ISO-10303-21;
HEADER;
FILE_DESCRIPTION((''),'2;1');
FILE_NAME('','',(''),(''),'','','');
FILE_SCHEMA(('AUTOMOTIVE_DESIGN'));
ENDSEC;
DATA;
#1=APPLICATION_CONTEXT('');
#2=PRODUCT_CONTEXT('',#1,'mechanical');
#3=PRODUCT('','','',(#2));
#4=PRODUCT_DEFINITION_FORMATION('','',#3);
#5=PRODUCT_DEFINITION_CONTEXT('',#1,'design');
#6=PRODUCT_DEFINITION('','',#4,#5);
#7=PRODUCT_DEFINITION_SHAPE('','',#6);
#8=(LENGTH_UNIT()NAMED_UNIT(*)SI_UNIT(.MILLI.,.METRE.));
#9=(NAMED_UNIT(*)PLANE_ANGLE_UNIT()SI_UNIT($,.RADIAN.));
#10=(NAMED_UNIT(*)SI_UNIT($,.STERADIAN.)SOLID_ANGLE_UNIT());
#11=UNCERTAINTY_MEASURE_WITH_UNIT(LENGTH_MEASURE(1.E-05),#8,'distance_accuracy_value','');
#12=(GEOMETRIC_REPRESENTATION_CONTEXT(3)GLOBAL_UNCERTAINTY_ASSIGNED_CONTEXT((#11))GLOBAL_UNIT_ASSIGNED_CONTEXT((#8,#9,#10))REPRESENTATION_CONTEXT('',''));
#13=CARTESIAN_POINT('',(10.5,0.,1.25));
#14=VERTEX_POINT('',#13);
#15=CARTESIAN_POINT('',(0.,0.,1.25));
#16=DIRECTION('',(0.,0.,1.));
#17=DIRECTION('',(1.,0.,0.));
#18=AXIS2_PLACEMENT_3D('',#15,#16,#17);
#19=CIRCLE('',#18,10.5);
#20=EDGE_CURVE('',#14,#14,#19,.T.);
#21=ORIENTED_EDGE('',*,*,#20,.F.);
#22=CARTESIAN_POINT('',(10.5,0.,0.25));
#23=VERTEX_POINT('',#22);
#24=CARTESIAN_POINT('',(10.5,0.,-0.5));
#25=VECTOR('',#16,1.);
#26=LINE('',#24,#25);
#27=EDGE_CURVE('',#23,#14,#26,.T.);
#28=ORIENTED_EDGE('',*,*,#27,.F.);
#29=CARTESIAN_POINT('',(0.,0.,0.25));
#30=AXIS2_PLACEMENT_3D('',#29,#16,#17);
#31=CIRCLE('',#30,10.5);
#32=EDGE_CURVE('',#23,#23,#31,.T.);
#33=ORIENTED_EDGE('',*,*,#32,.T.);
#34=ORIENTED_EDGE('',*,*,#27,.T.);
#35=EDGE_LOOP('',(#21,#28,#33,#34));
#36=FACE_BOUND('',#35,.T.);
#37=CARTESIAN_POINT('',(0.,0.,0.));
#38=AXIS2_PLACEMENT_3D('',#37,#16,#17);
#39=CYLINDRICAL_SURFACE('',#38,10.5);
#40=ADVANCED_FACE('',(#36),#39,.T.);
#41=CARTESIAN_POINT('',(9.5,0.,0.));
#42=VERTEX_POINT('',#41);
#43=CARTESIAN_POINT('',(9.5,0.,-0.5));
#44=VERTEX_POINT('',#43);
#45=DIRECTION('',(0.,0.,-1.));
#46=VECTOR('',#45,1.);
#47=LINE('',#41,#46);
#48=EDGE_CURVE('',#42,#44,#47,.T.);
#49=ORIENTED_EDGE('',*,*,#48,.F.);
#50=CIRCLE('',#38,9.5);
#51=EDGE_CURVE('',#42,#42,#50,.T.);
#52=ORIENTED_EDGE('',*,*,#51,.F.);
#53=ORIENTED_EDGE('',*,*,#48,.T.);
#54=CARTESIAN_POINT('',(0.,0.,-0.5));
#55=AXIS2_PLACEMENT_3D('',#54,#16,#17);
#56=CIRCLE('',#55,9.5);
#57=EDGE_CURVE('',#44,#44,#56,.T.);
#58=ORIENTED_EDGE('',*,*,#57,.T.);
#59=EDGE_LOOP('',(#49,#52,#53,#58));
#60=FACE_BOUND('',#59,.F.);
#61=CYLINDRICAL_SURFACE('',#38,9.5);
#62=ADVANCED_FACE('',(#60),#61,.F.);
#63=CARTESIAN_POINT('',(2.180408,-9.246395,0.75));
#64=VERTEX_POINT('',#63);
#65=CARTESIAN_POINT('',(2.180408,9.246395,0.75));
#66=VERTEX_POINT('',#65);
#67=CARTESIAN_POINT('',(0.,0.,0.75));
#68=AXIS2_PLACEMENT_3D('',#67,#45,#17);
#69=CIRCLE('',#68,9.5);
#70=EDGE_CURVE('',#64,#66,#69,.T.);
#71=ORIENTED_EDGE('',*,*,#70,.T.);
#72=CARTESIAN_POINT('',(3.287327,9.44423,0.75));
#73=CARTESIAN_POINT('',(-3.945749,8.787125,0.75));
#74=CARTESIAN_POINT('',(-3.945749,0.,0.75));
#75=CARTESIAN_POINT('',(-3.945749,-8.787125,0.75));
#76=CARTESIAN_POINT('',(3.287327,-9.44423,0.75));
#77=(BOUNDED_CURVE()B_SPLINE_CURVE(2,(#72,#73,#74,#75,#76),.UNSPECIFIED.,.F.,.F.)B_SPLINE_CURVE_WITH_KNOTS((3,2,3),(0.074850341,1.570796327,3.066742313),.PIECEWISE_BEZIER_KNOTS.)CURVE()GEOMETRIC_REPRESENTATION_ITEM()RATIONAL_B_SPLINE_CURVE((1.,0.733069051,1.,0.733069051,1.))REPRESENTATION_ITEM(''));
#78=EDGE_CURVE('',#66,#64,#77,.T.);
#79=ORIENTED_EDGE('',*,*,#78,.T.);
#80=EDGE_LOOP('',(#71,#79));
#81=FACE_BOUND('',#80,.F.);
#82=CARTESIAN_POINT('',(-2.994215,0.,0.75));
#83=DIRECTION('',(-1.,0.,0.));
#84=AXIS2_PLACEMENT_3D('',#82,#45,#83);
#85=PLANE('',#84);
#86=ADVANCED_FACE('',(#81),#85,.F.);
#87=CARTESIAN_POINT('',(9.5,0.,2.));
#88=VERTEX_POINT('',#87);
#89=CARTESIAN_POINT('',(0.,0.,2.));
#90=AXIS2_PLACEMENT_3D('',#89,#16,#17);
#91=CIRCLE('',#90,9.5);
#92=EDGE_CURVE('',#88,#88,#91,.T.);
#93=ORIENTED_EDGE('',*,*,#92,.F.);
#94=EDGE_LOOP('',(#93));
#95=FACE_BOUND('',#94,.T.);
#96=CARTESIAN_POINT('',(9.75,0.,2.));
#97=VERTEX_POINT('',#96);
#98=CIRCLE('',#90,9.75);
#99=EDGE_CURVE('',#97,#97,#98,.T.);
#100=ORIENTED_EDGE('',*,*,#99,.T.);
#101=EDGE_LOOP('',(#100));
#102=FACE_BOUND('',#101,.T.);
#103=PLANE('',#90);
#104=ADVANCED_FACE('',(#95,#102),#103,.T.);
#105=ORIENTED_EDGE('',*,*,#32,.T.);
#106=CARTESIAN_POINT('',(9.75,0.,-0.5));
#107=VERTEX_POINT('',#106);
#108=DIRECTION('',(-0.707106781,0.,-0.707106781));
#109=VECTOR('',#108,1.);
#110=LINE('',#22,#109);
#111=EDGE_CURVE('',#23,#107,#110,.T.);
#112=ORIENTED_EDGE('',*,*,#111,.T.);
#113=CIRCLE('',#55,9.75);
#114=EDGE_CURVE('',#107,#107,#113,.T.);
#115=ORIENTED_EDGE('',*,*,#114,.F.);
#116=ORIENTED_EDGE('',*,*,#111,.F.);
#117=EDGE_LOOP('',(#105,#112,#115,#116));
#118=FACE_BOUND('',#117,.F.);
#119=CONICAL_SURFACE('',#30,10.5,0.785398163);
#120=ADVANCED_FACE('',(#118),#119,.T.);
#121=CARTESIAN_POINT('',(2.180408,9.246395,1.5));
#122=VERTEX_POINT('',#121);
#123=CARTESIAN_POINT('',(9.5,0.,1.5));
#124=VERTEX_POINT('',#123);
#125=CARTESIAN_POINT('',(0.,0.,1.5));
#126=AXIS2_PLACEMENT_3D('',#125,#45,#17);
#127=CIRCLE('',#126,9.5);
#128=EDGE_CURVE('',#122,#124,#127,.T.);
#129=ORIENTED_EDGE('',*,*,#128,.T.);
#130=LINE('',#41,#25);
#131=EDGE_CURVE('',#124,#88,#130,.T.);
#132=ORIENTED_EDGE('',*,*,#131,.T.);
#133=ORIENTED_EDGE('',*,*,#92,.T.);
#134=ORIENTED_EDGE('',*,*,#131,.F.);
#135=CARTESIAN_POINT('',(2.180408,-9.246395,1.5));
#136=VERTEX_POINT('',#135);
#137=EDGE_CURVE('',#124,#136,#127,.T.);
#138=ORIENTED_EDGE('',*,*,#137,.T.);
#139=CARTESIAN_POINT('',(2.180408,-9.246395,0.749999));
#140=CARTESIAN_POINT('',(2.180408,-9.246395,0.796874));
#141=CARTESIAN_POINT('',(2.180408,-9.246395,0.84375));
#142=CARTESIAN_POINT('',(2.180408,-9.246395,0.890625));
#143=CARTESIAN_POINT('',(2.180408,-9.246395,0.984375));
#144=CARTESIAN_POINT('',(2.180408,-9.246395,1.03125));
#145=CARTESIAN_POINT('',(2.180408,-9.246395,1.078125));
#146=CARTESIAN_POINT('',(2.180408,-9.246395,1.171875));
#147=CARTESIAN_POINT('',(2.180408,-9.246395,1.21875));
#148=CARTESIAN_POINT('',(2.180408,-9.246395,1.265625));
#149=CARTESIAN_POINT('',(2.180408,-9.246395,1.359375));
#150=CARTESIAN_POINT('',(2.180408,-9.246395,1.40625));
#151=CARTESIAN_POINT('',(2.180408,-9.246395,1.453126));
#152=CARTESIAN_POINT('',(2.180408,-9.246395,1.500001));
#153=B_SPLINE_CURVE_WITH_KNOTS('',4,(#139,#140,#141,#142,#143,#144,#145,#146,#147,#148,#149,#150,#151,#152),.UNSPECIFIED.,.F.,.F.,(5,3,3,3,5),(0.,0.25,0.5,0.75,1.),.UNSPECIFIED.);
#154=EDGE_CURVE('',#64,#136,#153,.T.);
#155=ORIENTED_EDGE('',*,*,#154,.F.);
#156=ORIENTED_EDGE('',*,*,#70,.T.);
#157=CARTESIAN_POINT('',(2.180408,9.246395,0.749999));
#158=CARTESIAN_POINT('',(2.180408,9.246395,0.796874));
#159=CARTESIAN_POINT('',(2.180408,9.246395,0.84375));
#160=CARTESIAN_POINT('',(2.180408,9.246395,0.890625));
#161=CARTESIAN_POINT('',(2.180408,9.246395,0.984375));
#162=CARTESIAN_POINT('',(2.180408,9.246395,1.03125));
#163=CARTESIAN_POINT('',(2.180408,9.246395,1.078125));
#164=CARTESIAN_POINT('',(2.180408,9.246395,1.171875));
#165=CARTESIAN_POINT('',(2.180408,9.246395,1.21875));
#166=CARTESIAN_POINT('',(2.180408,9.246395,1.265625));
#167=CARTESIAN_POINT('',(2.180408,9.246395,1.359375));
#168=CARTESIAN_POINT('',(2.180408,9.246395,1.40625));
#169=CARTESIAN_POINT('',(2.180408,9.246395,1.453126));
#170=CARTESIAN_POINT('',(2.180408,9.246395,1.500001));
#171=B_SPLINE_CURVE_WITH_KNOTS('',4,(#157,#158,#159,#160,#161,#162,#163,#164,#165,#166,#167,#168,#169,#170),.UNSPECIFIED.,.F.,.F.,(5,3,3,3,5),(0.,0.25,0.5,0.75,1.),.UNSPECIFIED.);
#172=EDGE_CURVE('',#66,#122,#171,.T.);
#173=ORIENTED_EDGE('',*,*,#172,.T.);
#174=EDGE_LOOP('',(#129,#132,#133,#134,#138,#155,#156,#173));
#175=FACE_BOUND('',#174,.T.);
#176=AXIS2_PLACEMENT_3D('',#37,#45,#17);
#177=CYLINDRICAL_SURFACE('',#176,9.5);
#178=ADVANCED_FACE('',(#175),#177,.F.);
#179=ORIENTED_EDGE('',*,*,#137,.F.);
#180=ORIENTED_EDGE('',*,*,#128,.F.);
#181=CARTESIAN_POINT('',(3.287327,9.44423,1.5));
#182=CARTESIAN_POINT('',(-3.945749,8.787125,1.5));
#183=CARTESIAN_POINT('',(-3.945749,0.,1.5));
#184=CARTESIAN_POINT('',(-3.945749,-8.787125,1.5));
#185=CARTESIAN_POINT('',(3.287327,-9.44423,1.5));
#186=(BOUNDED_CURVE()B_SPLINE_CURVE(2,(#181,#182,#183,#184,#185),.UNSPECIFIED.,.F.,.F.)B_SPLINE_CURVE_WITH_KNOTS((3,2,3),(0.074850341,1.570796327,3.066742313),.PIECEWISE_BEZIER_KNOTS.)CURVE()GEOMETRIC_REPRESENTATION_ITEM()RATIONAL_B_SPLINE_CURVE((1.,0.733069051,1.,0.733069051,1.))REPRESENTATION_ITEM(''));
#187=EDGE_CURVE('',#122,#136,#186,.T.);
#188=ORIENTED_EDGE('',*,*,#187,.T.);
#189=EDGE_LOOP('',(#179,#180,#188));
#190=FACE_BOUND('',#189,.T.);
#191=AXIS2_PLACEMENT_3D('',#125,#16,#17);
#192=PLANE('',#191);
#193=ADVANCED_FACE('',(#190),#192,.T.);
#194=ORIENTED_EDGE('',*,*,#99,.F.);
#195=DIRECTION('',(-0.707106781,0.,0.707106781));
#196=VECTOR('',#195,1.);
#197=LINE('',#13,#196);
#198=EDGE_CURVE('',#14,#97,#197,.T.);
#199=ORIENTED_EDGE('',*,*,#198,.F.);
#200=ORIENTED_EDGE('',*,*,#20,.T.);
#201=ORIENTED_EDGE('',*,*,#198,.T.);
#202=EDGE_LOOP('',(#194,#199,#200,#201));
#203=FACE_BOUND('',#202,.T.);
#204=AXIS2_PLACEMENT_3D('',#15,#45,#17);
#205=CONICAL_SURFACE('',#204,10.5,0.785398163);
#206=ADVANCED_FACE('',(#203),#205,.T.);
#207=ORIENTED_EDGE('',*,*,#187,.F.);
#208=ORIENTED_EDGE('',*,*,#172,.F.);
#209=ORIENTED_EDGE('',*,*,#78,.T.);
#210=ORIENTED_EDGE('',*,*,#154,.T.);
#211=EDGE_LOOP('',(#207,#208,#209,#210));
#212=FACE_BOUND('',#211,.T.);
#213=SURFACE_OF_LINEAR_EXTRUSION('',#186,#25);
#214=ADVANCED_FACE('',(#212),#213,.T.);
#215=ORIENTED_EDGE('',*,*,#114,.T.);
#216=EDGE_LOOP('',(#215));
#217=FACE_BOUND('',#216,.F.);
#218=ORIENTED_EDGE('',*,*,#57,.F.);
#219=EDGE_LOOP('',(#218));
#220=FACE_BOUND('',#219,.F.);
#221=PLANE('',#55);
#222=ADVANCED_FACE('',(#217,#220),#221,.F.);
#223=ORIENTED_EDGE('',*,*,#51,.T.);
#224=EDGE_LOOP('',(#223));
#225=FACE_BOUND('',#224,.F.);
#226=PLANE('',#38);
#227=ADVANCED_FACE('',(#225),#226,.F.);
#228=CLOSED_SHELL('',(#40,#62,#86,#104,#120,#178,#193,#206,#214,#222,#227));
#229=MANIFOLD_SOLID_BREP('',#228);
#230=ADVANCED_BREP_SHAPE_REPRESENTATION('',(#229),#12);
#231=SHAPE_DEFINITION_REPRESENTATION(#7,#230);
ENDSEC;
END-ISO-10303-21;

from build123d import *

# Parameters (mm, degrees)
F0_R          = 10
F1_DEPTH      = 1.5
F3_DEPTH      = 0.75
F4_R          = 10.5
F4_R_2        = 9.5
F5_DEPTH      = 2
F5_DEPTH_BACK = 0.5
F6_SIZE       = 0.75


# Not quite as in the source:
# - a feature of the source that left no trace in its solid (it failed there, or was rolled back) is left out


with BuildPart() as f1:
    # F0 (on Top) → F1 (new body)
    with BuildSketch(Plane.XY):
        Circle(F0_R)
    extrude(amount=F1_DEPTH)

    # F2 (on face) → F3 (cut)
    with BuildSketch(Plane.XY.offset(1.5)):
        with BuildLine():
            add(Edge.make_bspline(
                [(3.2873270655, 9.444230025), (-3.9457486769, 8.7871247234), (-3.9457486769, 0), (-3.9457486769, -8.7871247234), (3.2873270655, -9.444230025)],
                knots=[0.0748503411, 0.0748503411, 0.0748503411, 1.5707963268, 1.5707963268, 3.0667423125, 3.0667423125, 3.0667423125], degree=2, weights=[1, 0.7330690514, 1, 0.7330690514, 1]))
            ThreePointArc((3.2873270655, 9.444230025), (-10, 0), (3.2873270655, -9.444230025))
        make_face()
    extrude(amount=-F3_DEPTH, mode=Mode.SUBTRACT)

    # F4 (on Top) → F5 (join, two sides)
    with BuildSketch(Plane.XY) as f5_sk:
        Circle(F4_R)
        Circle(F4_R_2, mode=Mode.SUBTRACT)
    extrude(amount=F5_DEPTH)
    extrude(f5_sk.sketch, amount=-F5_DEPTH_BACK)

    # F6
    f6_edges = [f1.edges().sort_by_distance(p)[0] for p in [
        (-10.5, 0, 2),
        (-10.5, 0, -0.5),
    ]]
    chamfer(f6_edges, length=F6_SIZE)


solid = f1.part
